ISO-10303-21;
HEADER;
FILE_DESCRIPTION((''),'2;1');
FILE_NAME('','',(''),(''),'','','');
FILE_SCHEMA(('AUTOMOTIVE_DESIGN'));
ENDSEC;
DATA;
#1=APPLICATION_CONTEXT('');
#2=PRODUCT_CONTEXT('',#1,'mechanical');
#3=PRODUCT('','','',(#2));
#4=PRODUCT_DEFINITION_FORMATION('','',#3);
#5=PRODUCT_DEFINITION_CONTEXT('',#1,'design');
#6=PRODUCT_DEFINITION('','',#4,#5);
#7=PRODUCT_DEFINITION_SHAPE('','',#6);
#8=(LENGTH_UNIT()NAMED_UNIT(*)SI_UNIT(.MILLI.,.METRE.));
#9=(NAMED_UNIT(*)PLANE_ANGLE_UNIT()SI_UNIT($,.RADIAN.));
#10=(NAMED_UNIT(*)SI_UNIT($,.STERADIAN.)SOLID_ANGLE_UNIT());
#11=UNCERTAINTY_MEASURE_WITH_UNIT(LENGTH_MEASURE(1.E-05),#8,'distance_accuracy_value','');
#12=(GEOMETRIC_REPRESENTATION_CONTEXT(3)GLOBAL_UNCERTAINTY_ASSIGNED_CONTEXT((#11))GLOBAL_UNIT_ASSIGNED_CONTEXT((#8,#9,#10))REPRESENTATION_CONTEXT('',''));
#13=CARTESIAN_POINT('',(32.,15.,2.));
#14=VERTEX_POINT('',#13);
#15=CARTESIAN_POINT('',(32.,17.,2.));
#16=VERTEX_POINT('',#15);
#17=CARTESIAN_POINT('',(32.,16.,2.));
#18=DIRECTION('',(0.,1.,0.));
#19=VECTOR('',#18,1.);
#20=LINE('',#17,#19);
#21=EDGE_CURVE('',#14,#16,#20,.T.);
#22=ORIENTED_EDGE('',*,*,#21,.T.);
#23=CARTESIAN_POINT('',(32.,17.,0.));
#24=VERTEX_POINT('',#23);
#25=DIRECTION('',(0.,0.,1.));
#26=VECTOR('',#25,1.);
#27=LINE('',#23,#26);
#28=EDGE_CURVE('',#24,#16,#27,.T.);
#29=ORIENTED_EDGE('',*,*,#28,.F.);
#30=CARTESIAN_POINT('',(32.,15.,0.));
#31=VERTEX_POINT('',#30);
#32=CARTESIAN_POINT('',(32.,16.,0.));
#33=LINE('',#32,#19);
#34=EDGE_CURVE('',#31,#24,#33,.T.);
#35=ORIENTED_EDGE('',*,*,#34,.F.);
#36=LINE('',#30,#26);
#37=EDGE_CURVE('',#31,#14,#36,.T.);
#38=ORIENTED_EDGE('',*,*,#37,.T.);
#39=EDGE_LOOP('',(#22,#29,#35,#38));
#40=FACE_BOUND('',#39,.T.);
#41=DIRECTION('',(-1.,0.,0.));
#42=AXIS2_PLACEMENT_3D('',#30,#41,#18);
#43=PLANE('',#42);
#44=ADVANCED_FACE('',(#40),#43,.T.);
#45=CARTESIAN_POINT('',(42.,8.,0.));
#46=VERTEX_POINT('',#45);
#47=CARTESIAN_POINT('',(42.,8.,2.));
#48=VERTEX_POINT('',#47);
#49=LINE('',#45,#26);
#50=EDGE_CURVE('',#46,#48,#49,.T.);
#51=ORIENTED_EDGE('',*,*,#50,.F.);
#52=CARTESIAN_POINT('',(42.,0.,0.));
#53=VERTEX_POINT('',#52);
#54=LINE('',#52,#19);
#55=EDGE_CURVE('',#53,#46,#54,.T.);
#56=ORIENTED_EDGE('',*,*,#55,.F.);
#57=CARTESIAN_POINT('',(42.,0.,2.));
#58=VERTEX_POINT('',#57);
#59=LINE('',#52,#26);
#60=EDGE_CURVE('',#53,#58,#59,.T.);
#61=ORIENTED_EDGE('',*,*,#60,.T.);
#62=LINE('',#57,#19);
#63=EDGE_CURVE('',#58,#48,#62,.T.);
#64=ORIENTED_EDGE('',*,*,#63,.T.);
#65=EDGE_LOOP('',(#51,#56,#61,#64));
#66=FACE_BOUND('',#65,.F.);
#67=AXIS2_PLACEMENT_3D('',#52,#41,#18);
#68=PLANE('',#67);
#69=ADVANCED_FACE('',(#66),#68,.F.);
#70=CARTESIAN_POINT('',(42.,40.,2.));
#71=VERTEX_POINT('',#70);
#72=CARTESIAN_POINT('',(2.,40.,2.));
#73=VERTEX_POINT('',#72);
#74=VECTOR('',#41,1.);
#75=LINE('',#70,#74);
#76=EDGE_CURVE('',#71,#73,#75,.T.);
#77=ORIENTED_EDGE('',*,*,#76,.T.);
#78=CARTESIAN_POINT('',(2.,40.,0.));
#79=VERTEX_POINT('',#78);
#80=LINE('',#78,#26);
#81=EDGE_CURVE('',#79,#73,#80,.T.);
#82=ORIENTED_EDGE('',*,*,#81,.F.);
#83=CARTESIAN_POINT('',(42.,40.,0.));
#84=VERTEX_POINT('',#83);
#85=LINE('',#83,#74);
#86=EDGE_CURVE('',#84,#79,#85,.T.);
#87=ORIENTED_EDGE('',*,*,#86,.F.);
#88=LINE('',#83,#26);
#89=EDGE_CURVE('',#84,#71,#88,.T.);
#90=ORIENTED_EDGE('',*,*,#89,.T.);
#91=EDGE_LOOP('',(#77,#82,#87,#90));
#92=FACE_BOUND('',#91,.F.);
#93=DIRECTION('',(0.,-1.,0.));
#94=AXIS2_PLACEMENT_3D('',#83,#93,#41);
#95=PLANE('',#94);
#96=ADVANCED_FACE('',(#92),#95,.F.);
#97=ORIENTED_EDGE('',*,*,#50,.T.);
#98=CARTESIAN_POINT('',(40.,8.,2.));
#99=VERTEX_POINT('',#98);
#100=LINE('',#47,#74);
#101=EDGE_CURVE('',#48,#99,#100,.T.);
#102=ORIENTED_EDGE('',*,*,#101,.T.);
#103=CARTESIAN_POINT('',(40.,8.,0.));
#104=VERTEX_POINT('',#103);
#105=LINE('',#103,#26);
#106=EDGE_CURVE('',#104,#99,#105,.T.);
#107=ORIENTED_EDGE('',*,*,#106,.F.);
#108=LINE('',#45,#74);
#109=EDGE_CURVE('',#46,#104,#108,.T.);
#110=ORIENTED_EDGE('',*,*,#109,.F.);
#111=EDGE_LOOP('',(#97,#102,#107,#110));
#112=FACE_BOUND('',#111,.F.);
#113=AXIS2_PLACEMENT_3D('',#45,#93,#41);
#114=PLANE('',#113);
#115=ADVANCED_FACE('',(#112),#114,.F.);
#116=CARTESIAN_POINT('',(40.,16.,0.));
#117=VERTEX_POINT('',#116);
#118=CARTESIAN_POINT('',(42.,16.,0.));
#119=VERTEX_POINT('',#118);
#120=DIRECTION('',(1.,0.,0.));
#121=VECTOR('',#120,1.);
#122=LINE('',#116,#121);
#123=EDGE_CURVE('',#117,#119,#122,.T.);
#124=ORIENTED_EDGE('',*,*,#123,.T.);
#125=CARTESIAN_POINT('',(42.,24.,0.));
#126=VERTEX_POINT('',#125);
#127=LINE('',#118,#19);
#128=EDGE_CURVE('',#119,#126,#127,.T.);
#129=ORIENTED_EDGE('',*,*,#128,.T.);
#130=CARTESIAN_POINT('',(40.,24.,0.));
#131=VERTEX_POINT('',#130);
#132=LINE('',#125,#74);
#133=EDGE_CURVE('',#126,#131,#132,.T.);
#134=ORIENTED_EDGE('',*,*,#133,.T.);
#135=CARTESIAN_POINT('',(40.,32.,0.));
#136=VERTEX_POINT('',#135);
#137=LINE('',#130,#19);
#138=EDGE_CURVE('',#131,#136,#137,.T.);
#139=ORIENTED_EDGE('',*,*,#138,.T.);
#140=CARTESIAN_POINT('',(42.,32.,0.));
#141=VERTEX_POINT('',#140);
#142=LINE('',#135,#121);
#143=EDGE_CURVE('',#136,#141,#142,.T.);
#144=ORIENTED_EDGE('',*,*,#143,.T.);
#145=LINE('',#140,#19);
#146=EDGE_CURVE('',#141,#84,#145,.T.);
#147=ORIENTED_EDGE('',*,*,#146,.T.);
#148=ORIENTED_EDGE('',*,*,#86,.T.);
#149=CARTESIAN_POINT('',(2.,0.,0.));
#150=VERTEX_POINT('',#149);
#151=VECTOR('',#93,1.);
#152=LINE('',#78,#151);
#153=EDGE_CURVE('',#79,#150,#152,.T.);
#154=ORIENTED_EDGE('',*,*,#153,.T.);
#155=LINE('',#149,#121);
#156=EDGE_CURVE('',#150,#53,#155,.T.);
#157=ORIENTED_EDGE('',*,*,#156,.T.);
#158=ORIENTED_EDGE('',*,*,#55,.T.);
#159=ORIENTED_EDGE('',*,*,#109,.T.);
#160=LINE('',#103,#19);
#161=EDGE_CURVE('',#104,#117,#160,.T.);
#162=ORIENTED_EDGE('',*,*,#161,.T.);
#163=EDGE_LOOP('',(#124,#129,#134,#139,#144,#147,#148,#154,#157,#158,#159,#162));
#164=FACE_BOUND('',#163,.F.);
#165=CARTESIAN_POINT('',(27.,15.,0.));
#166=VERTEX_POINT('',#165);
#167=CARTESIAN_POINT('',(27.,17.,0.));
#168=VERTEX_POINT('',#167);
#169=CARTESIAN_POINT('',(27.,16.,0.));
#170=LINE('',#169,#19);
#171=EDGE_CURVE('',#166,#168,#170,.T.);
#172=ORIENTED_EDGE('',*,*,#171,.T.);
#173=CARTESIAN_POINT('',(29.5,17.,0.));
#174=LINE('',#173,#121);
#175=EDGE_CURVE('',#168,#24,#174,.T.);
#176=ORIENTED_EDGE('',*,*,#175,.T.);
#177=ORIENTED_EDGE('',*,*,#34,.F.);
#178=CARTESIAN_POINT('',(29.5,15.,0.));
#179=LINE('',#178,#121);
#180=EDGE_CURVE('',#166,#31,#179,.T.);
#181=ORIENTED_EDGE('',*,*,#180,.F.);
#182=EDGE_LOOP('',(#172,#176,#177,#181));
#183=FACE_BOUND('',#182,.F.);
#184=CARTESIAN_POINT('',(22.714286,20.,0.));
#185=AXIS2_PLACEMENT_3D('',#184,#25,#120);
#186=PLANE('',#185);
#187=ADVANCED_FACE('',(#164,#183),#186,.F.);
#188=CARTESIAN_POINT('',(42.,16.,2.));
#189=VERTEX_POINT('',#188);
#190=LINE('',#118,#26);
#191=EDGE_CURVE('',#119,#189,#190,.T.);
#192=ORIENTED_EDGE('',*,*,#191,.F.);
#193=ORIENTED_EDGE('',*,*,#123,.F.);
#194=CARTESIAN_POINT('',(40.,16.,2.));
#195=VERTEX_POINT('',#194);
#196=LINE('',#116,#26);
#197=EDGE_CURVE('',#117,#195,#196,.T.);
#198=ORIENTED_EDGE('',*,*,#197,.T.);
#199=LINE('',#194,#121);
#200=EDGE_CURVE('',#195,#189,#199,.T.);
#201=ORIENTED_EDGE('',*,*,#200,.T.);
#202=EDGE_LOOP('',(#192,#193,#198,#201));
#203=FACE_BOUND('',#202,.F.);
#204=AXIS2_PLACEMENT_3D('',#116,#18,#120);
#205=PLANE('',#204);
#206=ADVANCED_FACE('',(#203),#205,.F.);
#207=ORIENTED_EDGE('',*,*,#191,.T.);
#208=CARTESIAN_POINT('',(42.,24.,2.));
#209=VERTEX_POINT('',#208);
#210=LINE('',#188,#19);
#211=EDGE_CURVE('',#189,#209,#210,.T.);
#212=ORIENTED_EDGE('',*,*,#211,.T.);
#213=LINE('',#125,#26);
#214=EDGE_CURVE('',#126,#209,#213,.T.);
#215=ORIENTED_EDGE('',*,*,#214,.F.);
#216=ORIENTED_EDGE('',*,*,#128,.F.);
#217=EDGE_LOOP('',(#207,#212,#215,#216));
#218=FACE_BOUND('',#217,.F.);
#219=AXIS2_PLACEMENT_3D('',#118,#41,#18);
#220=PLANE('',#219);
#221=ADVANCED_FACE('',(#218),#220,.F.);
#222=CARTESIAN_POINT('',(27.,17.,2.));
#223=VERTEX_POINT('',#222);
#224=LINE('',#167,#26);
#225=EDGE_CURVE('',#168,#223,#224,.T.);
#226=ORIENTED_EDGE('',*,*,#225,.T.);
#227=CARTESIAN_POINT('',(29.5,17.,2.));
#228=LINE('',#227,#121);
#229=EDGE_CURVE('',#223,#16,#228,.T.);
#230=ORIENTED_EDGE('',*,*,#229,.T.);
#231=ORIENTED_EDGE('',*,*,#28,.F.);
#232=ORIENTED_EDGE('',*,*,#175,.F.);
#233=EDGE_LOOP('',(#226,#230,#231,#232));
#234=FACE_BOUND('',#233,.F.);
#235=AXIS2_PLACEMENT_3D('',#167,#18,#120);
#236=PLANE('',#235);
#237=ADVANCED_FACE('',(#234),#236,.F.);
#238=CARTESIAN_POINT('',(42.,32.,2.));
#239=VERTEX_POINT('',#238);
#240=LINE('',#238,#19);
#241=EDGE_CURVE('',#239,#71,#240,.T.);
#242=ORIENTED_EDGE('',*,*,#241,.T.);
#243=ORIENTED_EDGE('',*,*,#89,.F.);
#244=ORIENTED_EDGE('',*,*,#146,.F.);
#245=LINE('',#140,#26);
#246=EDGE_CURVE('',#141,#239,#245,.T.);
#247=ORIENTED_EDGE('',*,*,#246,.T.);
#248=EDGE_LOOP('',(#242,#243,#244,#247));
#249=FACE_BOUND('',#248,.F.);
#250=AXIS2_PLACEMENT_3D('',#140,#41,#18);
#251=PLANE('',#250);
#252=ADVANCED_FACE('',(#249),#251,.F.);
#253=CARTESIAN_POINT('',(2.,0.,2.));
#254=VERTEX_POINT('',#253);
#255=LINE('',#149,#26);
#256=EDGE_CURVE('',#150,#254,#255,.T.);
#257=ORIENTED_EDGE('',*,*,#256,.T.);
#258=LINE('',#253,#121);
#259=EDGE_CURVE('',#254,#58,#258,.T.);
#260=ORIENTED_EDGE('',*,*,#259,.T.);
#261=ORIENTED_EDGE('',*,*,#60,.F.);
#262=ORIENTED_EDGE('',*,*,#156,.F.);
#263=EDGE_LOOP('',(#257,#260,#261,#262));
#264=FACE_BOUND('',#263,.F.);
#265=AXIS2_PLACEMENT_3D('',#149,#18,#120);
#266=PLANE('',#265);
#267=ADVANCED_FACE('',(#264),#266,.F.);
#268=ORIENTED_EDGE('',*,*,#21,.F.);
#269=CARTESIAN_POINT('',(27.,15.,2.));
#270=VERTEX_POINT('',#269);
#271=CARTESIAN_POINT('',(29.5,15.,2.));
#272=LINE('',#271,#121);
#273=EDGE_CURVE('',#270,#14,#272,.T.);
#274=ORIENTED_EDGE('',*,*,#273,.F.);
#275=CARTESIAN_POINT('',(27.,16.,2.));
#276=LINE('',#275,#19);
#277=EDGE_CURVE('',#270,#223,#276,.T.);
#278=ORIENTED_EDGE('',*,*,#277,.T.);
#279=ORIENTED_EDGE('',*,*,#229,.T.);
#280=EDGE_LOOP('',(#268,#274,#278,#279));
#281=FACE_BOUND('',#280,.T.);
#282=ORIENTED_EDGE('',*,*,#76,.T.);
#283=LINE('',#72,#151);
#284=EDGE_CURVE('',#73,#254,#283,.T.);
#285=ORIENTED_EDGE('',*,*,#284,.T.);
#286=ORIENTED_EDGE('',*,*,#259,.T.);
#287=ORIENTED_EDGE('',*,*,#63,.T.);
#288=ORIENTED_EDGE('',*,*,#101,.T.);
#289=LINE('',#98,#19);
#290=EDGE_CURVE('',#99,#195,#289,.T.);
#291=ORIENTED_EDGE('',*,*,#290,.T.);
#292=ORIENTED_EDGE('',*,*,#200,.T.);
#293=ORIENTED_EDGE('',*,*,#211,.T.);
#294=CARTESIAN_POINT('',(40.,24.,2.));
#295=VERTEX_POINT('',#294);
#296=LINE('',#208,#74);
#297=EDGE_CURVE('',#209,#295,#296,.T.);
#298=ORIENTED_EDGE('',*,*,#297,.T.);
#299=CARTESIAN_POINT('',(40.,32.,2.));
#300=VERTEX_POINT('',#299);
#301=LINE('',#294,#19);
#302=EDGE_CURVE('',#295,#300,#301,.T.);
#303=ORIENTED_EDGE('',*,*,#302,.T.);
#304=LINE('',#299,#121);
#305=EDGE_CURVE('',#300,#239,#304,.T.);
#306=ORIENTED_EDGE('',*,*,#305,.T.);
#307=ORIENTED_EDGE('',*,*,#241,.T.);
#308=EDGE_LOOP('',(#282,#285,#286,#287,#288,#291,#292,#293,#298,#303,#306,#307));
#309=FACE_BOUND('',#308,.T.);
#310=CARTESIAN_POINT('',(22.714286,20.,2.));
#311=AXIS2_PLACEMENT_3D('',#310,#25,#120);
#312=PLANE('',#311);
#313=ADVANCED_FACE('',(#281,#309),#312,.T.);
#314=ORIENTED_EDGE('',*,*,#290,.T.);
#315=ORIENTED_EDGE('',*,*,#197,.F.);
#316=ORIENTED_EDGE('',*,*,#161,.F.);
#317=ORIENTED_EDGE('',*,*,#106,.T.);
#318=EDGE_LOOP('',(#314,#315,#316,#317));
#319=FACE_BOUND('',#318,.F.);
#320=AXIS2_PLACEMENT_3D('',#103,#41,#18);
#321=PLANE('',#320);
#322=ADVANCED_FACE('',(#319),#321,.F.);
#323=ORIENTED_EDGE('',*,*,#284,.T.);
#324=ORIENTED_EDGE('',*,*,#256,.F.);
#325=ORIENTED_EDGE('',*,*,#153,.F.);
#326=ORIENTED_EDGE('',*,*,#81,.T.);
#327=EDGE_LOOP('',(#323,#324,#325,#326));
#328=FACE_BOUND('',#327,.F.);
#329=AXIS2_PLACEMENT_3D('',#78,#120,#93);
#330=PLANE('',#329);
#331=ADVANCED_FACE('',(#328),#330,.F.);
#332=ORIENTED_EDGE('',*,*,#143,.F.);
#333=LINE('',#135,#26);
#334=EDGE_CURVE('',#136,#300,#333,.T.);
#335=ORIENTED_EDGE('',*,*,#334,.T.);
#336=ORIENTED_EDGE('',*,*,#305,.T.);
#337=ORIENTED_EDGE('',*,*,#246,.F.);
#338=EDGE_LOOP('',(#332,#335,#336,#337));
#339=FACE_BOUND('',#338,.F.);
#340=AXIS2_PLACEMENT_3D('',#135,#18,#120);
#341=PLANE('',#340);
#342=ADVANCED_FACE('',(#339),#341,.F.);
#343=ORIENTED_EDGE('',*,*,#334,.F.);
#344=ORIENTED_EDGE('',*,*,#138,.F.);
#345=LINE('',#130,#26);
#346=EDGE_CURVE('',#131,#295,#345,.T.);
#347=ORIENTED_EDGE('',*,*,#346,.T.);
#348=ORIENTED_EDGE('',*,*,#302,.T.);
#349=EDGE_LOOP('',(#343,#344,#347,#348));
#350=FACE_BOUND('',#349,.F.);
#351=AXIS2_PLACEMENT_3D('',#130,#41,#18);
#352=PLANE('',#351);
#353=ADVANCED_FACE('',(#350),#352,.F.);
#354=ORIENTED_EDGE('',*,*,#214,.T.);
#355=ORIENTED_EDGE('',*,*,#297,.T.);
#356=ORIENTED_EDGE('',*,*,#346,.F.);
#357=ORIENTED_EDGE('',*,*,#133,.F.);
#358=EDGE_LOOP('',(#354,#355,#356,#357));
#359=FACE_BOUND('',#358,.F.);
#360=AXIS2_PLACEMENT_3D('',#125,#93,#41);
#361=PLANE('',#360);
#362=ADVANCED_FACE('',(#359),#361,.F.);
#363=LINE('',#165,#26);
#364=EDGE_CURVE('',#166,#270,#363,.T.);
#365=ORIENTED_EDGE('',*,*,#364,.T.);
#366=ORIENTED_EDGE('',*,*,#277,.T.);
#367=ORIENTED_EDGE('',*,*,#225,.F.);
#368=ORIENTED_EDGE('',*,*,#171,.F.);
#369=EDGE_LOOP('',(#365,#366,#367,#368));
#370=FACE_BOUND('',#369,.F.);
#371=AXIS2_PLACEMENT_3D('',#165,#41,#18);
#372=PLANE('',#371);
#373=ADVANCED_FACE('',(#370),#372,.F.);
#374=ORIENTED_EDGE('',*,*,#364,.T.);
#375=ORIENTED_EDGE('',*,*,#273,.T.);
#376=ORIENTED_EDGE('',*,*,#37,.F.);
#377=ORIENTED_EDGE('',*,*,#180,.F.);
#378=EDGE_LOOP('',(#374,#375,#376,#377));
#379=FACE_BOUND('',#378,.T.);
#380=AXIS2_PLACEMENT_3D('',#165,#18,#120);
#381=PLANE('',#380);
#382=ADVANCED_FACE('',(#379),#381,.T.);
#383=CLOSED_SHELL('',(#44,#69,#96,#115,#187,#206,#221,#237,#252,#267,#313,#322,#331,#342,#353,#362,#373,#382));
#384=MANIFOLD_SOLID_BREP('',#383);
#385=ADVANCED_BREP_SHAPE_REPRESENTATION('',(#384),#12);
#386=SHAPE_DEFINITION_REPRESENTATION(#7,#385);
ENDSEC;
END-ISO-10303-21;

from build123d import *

# Parameters (mm, degrees)
F0_DEPTH = 2
F1_W     = 5
F1_H     = 2
F3_DEPTH = 2


# Not quite as in the source:
# - a feature names something its author has since deleted; it is built from what else it names


with BuildPart() as f0:
    # F2 (on Top) → F0 (new body)
    with BuildSketch(Plane.XY):
        Polygon((2, 40), (2, 0), (42, 0), (42, 8), (40, 8), (40, 16), (42, 16), (42, 24), (40, 24), (40, 32), (42, 32), (42, 40), align=None)
    extrude(amount=F0_DEPTH)

    # F1 (on Top) → F3 (cut)
    with BuildSketch(Plane.XY):
        with Locations((29.5, 16)):
            Rectangle(F1_W, F1_H)
    extrude(amount=F3_DEPTH, mode=Mode.SUBTRACT)


solid = f0.part
